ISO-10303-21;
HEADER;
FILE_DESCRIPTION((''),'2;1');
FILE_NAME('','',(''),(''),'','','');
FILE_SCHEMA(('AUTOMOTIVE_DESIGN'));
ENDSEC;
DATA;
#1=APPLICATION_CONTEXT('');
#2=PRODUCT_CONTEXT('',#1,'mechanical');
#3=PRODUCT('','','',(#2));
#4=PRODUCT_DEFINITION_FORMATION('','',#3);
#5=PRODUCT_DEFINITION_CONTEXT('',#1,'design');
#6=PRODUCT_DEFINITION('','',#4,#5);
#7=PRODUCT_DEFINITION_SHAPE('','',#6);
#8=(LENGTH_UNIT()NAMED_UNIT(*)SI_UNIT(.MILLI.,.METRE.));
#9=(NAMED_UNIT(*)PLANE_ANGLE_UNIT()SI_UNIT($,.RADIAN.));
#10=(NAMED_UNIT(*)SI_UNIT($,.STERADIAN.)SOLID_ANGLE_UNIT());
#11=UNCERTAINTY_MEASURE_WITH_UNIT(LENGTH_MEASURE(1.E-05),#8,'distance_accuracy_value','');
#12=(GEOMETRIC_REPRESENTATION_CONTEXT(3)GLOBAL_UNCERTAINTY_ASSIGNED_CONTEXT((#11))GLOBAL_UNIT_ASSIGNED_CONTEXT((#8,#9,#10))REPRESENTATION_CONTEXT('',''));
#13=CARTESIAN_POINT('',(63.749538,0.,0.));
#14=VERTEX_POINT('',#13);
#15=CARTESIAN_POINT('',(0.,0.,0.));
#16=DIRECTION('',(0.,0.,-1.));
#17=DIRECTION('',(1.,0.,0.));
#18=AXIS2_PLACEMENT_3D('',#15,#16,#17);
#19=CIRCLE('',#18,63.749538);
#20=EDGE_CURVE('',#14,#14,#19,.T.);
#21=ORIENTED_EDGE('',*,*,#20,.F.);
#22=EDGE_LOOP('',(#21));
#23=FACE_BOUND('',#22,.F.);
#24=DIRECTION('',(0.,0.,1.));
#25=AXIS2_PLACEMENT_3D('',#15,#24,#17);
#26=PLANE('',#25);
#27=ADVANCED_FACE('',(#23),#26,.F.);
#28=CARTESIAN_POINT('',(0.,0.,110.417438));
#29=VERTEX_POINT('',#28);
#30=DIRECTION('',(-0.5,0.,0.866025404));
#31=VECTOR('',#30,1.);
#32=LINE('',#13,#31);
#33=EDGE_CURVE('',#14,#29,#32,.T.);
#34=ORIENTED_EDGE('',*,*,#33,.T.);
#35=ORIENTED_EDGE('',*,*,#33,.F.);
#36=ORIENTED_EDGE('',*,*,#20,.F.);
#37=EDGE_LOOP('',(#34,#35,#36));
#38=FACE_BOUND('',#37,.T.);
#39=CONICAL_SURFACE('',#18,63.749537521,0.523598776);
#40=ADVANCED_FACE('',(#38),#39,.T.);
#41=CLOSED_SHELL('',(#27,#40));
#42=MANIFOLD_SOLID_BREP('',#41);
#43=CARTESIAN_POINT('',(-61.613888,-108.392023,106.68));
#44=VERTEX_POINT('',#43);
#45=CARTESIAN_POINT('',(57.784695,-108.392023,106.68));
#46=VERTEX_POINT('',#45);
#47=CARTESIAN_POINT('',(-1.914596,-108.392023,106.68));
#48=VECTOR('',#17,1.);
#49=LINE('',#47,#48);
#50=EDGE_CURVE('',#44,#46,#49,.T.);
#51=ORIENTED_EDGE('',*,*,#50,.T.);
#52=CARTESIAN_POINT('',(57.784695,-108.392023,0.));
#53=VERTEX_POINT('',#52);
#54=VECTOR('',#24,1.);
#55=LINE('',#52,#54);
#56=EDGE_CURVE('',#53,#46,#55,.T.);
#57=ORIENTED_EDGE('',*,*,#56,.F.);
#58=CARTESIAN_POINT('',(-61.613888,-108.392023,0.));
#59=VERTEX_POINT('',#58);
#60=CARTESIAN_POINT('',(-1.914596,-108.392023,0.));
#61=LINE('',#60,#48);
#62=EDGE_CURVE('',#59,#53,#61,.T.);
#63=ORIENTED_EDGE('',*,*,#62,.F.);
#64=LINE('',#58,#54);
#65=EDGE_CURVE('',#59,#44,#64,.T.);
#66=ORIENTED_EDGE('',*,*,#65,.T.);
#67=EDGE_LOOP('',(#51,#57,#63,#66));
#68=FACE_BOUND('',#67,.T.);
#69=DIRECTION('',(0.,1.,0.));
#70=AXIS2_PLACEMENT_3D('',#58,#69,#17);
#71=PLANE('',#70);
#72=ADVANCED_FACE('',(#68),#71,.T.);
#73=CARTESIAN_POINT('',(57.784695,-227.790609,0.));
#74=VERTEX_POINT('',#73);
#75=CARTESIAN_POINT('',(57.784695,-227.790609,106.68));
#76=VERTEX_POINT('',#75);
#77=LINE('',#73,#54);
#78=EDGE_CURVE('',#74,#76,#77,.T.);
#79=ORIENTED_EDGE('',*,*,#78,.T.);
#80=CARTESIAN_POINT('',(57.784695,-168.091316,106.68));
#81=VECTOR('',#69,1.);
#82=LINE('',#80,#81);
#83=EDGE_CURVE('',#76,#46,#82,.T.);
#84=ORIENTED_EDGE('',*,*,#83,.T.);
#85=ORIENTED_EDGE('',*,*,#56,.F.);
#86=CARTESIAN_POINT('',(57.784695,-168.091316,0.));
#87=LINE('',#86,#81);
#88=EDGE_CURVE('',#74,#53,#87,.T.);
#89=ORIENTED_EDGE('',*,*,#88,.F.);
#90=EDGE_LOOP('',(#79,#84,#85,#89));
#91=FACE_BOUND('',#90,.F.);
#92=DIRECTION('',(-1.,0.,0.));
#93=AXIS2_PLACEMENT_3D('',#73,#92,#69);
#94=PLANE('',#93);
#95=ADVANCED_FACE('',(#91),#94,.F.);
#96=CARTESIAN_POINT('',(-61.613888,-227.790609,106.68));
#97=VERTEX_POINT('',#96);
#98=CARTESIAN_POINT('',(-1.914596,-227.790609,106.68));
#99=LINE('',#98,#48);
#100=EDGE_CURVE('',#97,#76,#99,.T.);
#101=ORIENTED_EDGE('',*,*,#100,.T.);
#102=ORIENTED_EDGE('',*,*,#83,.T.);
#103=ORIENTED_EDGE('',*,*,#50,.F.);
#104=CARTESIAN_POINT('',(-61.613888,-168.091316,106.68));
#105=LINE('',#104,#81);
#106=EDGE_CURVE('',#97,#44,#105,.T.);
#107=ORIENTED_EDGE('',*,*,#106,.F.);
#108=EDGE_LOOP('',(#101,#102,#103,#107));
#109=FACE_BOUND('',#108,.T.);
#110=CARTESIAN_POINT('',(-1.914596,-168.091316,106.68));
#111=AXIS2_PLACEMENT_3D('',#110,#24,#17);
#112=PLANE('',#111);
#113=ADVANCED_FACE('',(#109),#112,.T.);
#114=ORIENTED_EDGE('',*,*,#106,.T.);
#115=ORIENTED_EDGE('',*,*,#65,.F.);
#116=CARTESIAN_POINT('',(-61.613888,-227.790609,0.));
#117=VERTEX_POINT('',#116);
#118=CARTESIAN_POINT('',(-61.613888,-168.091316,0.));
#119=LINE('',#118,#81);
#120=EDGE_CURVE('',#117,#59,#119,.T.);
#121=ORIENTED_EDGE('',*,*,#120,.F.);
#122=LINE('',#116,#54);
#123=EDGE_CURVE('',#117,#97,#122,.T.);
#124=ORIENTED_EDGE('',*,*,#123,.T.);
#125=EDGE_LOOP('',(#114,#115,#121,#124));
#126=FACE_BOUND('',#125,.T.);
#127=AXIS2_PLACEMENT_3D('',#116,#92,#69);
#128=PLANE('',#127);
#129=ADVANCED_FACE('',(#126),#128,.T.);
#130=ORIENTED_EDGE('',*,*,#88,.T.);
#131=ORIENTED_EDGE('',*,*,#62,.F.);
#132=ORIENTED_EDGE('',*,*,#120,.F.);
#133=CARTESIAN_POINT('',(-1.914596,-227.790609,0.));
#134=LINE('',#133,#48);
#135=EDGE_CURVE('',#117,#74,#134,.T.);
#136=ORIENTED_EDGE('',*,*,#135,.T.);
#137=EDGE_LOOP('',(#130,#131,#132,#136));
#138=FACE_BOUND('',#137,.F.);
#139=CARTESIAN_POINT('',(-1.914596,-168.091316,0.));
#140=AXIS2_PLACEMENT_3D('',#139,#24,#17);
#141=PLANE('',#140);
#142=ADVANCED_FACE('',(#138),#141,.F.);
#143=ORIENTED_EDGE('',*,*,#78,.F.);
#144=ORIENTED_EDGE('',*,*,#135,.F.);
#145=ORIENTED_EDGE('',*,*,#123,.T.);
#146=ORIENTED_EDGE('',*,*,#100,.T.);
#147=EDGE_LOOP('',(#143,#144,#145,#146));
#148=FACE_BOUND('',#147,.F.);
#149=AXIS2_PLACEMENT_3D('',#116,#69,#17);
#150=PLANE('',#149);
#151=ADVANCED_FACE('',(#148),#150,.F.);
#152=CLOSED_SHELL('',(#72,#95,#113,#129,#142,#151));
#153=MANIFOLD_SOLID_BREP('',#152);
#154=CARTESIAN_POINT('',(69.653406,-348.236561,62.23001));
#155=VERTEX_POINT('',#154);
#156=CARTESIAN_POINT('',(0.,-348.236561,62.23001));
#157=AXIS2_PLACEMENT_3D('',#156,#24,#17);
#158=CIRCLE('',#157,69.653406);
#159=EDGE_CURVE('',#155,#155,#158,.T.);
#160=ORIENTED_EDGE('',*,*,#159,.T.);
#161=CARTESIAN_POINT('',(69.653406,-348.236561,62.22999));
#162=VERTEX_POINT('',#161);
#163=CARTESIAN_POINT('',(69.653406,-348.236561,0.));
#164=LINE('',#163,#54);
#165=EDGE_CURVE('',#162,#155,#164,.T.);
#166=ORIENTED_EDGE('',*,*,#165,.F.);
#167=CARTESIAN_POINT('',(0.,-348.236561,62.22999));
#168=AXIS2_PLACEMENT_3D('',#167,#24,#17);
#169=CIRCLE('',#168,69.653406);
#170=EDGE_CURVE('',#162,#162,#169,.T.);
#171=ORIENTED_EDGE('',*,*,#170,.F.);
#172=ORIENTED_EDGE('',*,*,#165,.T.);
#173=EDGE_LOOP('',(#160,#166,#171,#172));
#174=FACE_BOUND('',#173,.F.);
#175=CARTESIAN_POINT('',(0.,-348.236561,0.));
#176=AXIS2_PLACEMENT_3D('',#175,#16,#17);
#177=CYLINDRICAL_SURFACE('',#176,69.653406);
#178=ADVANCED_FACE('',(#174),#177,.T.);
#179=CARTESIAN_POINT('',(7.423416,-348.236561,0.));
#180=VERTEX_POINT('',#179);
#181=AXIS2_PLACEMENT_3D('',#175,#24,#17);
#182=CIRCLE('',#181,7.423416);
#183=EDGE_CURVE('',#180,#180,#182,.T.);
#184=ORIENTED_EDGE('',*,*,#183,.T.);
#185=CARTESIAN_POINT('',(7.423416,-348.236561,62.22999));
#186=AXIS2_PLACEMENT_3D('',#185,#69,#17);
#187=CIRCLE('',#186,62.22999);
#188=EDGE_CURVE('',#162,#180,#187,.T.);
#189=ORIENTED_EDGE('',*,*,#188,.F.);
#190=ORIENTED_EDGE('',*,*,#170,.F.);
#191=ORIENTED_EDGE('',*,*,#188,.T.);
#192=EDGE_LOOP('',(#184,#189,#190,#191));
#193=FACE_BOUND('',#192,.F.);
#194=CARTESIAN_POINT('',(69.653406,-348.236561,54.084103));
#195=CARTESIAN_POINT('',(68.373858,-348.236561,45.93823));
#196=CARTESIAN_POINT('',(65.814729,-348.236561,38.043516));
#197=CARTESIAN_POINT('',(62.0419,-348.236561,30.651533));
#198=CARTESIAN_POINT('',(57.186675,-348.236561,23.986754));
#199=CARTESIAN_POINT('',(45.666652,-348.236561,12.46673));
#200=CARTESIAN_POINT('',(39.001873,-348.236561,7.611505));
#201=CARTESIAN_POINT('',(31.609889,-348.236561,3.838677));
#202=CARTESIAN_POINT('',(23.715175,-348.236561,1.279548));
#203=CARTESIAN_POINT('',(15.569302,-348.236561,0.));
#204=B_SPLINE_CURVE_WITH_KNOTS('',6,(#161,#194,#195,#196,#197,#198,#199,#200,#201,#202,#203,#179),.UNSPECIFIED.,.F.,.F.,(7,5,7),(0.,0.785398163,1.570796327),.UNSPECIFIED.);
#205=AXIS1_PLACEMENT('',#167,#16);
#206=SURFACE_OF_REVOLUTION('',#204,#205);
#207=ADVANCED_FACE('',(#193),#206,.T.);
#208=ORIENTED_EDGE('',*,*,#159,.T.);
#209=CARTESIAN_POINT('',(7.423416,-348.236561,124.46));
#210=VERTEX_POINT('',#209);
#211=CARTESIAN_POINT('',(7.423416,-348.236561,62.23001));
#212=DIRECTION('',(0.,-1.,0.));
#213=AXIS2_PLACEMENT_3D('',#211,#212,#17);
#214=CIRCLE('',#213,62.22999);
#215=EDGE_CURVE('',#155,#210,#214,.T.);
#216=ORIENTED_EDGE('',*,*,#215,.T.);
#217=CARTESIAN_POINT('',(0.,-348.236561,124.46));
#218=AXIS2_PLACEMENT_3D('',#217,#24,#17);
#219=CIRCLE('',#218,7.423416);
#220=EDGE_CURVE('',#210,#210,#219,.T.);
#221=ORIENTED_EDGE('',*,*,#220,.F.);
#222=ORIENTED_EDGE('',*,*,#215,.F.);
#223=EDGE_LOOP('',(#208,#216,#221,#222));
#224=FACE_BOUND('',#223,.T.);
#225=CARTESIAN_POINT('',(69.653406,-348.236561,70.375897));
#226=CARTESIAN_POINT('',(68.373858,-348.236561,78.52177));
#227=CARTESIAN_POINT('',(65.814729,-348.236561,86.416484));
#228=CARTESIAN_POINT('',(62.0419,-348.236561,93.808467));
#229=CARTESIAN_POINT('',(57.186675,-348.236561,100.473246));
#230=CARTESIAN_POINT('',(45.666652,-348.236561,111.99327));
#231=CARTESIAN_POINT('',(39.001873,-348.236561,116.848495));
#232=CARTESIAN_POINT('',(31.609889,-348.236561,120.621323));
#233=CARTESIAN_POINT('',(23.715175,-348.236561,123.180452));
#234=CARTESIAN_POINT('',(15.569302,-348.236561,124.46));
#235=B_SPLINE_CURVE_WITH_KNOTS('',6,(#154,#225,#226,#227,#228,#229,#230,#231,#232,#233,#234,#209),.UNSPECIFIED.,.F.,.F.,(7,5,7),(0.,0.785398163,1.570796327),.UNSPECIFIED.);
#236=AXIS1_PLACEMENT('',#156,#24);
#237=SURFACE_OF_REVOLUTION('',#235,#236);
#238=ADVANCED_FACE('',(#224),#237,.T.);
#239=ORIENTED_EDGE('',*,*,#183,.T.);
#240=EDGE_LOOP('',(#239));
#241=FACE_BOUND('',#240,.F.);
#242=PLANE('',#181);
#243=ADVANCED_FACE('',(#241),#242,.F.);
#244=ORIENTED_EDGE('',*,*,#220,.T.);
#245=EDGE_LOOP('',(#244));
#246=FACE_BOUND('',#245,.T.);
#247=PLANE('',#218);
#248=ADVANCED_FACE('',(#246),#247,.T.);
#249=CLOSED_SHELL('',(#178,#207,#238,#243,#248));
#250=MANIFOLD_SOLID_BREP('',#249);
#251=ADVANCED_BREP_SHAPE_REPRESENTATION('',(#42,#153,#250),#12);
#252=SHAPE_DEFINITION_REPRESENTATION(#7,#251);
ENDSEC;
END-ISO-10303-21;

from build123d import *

# Parameters (mm, degrees)
F0_R     = 63.7495375214
F1_DEPTH = 153.67
F1_TAPER = 30
F2_W     = 119.3985827267
F2_H     = 119.398586452
F3_DEPTH = 106.68
F4_R     = 69.6534055832
F5_DEPTH = 124.46
F6_R     = 62.22999


# Not quite as in the source:
# - a fillet or chamfer is up to 0.001 mm smaller than in the source, because OpenCascade refuses the exact size


with BuildPart() as f1:
    # F0 (on Top) → F1 (new body)
    with BuildSketch(Plane.XY):
        Circle(F0_R)
    extrude(amount=F1_DEPTH, taper=F1_TAPER)


with BuildPart() as f3:
    # F2 (on Top) → F3 (new body)
    with BuildSketch(Plane.XY):
        with Locations((-1.9145961851, -168.0913157761)):
            Rectangle(F2_W, F2_H)
    extrude(amount=F3_DEPTH)


with BuildPart() as f5:
    # F4 (on Top) → F5 (new body)
    with BuildSketch(Plane.XY):
        with Locations((0, -348.2365608215)):
            Circle(F4_R)
    extrude(amount=F5_DEPTH)

    # F6 (radius 62.23 in the source; OpenCascade refuses exactly that, so slightly less here)
    f6_edges = [f5.edges().sort_by_distance(p)[0] for p in [
        (-69.653406, -348.236561, 0),
        (-69.653406, -348.236561, 124.46),
    ]]
    fillet(f6_edges, radius=F6_R)


solid = Compound([f1.part, f3.part, f5.part])
